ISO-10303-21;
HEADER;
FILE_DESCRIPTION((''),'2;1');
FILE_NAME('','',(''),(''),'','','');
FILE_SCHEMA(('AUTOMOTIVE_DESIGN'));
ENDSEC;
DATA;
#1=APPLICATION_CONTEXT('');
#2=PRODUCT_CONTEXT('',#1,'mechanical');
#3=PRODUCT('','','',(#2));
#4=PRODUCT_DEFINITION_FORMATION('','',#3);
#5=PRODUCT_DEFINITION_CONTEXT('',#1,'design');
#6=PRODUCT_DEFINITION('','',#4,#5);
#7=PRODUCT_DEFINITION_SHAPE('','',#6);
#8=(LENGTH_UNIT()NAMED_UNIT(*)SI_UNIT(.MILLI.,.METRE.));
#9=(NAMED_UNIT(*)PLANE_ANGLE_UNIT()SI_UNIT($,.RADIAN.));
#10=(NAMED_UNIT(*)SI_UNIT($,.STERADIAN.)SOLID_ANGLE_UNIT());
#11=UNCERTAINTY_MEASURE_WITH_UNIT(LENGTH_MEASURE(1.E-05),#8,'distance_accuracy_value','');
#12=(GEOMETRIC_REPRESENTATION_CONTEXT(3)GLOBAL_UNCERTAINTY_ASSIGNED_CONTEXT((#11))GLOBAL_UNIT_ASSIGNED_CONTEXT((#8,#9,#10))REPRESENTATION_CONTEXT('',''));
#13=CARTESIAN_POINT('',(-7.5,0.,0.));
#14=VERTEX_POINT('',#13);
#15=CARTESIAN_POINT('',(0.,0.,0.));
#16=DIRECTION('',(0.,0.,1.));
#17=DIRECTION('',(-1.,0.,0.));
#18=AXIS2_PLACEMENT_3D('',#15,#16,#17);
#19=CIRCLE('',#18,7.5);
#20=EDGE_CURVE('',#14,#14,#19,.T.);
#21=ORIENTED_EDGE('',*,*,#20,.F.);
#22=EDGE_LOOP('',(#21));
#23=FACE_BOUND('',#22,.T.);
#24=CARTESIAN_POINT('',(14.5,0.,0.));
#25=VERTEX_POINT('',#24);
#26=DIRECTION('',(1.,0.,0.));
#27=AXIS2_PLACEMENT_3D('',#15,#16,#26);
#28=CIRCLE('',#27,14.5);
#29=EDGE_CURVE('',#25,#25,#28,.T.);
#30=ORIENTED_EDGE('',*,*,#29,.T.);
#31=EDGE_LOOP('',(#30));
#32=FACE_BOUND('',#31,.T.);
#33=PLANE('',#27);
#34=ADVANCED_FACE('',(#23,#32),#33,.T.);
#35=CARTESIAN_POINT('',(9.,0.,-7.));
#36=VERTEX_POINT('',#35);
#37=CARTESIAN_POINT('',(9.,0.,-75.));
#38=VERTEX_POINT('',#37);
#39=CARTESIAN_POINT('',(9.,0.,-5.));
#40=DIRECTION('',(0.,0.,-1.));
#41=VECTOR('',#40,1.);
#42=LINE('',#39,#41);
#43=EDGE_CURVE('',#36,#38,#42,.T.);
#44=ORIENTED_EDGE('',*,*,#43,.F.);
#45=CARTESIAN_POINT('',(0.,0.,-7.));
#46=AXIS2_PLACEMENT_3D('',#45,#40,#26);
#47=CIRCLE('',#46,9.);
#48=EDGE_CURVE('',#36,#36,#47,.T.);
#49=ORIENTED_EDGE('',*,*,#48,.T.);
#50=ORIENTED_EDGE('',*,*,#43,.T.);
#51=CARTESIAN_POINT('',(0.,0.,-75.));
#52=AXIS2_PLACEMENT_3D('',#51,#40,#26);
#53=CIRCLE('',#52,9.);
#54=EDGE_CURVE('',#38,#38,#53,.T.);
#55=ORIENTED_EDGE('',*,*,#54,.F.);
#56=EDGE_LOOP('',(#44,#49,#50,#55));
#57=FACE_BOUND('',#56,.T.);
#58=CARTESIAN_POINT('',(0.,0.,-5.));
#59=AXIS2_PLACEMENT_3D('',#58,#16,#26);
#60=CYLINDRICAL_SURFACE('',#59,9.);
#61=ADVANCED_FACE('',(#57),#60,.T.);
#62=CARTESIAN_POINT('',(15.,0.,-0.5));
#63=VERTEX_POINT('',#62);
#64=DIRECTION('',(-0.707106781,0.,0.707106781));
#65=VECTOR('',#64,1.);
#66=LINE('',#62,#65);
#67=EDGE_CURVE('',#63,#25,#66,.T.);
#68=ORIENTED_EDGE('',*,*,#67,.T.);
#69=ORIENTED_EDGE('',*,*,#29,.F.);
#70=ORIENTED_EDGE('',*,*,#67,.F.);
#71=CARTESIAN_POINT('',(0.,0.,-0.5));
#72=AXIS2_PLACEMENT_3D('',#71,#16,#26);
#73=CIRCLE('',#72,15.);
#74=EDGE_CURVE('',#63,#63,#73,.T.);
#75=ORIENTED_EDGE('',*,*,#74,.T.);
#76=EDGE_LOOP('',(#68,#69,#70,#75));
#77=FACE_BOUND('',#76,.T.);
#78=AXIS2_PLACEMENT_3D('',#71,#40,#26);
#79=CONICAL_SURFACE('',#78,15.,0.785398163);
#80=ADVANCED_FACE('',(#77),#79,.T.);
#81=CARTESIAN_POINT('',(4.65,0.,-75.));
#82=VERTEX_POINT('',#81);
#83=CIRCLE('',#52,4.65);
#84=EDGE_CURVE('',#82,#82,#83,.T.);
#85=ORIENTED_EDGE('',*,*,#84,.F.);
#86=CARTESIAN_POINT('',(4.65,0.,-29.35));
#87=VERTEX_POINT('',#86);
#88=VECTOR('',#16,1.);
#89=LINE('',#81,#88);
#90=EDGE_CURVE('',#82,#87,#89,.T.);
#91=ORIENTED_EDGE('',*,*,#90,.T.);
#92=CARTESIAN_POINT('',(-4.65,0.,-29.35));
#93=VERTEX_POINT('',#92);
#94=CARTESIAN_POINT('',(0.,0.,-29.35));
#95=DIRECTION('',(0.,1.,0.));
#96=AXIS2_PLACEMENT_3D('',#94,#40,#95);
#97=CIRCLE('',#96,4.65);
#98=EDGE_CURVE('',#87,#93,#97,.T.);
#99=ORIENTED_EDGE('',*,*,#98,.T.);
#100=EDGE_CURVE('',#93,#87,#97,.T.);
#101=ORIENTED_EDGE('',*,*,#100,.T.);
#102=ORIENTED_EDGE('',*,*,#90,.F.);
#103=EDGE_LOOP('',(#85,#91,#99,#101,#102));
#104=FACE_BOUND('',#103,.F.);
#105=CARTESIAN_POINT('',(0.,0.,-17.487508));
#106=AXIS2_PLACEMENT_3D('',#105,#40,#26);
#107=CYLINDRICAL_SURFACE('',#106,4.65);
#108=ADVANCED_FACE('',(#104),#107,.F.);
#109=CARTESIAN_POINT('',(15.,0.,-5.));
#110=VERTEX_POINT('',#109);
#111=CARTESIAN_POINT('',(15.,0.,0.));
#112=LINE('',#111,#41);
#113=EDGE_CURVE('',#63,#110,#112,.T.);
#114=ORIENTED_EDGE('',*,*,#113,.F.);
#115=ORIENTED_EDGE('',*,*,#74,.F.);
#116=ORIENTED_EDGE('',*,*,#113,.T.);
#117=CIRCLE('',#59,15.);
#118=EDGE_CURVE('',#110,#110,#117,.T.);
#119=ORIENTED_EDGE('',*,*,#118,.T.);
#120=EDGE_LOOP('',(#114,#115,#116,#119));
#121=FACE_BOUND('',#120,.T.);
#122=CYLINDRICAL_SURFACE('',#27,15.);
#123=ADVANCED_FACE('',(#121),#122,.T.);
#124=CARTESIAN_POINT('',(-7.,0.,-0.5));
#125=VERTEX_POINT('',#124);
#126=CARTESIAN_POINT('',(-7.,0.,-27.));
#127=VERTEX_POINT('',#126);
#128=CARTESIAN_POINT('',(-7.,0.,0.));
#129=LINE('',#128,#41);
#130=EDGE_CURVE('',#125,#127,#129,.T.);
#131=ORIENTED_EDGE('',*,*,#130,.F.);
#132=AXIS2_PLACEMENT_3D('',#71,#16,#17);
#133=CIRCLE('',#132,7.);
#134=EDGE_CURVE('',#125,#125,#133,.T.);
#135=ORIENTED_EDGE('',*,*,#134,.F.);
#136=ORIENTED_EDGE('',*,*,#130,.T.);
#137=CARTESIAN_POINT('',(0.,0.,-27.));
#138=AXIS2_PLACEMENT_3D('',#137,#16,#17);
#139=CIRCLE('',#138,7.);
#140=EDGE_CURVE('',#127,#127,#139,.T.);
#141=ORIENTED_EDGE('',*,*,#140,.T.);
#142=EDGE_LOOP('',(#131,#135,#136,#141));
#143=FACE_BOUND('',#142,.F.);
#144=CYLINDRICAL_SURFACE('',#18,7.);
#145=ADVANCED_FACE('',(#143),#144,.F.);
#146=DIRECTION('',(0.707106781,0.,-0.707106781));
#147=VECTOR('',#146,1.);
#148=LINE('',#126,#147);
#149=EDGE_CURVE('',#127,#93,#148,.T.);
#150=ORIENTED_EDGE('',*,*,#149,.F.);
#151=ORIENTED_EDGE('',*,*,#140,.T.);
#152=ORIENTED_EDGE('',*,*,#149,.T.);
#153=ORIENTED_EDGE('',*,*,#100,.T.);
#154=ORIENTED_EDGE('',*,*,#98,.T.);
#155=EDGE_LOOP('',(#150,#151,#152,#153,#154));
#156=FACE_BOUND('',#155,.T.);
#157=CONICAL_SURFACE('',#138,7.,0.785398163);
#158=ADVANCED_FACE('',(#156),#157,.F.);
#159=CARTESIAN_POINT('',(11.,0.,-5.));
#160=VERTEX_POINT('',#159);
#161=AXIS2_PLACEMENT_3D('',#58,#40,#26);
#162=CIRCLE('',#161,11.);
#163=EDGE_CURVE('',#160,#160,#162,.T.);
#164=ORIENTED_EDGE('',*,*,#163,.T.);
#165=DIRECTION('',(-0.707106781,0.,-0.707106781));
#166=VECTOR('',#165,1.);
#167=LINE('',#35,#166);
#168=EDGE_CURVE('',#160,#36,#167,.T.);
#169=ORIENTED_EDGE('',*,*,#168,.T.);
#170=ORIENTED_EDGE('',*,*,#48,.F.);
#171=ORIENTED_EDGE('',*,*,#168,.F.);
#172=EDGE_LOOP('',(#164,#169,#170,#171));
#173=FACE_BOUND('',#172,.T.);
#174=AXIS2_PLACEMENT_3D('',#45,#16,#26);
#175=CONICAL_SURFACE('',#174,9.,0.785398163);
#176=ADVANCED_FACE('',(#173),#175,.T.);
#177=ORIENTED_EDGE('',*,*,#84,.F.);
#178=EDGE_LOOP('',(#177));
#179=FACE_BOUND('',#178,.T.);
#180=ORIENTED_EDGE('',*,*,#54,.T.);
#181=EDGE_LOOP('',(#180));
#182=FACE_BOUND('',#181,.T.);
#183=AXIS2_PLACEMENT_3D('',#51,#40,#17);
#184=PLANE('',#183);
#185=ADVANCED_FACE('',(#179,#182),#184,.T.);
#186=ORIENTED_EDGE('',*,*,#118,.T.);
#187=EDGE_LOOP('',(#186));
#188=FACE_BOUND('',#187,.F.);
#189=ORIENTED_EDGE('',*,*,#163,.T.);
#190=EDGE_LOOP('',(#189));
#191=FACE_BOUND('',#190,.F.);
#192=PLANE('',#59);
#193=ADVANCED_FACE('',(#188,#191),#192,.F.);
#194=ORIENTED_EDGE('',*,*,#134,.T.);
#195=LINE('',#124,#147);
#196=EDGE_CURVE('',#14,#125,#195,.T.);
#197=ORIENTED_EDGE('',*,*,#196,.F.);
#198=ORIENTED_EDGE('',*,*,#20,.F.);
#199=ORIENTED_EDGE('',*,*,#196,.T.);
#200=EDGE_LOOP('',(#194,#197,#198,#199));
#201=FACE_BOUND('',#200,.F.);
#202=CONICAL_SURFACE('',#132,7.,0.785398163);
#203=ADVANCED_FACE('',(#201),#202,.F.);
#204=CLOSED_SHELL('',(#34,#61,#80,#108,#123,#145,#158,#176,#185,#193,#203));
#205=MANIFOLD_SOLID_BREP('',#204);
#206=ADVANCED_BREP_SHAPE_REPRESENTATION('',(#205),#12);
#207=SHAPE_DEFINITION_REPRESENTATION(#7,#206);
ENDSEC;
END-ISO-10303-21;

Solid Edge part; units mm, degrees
sketch "Sketch1" plane through (0, 0, 0) normal (0, 0, 1) x (1, 0, 0)
  circle A0 centre (0, 0) radius 15
extrude "Extrusionsausprägung_22" add sketch "Sketch1" against normal blind 5
sketch "Sketch2" plane through (0, 0, -5) normal (0, 0, -1) x (1, 0, 0)
  circle A0 centre (0, 0) radius 9
extrude "Extrusionsausprägung_23" add sketch "Sketch2" along normal blind 70
sketch "Sketch3" plane through (0, 0, -75) normal (0, 0, -1) x (1, 0, 0)
  circle A0 centre (0, 0) radius 4.65
extrude "Extrusionsausschnitt_30" cut sketch "Sketch3" against normal blind 89
sketch "Sketch4" plane through (0, 0, 0) normal (0, 0, 1) x (-1, 0, 0)
  circle A0 centre (0, 0) radius 7
extrude "Extrusionsausschnitt_31" cut sketch "Sketch4" against normal blind 30
chamfer "Fase_11" distance 3 angle 45 1 edges at (7, 0, -30)
chamfer "Fase_12" distance 0.5 angle 45 2 edges at (7, 0, 0) (-15, 0, 0)
chamfer "Fase_13" distance 2 angle 45 1 edges at (-9, 0, -5)
